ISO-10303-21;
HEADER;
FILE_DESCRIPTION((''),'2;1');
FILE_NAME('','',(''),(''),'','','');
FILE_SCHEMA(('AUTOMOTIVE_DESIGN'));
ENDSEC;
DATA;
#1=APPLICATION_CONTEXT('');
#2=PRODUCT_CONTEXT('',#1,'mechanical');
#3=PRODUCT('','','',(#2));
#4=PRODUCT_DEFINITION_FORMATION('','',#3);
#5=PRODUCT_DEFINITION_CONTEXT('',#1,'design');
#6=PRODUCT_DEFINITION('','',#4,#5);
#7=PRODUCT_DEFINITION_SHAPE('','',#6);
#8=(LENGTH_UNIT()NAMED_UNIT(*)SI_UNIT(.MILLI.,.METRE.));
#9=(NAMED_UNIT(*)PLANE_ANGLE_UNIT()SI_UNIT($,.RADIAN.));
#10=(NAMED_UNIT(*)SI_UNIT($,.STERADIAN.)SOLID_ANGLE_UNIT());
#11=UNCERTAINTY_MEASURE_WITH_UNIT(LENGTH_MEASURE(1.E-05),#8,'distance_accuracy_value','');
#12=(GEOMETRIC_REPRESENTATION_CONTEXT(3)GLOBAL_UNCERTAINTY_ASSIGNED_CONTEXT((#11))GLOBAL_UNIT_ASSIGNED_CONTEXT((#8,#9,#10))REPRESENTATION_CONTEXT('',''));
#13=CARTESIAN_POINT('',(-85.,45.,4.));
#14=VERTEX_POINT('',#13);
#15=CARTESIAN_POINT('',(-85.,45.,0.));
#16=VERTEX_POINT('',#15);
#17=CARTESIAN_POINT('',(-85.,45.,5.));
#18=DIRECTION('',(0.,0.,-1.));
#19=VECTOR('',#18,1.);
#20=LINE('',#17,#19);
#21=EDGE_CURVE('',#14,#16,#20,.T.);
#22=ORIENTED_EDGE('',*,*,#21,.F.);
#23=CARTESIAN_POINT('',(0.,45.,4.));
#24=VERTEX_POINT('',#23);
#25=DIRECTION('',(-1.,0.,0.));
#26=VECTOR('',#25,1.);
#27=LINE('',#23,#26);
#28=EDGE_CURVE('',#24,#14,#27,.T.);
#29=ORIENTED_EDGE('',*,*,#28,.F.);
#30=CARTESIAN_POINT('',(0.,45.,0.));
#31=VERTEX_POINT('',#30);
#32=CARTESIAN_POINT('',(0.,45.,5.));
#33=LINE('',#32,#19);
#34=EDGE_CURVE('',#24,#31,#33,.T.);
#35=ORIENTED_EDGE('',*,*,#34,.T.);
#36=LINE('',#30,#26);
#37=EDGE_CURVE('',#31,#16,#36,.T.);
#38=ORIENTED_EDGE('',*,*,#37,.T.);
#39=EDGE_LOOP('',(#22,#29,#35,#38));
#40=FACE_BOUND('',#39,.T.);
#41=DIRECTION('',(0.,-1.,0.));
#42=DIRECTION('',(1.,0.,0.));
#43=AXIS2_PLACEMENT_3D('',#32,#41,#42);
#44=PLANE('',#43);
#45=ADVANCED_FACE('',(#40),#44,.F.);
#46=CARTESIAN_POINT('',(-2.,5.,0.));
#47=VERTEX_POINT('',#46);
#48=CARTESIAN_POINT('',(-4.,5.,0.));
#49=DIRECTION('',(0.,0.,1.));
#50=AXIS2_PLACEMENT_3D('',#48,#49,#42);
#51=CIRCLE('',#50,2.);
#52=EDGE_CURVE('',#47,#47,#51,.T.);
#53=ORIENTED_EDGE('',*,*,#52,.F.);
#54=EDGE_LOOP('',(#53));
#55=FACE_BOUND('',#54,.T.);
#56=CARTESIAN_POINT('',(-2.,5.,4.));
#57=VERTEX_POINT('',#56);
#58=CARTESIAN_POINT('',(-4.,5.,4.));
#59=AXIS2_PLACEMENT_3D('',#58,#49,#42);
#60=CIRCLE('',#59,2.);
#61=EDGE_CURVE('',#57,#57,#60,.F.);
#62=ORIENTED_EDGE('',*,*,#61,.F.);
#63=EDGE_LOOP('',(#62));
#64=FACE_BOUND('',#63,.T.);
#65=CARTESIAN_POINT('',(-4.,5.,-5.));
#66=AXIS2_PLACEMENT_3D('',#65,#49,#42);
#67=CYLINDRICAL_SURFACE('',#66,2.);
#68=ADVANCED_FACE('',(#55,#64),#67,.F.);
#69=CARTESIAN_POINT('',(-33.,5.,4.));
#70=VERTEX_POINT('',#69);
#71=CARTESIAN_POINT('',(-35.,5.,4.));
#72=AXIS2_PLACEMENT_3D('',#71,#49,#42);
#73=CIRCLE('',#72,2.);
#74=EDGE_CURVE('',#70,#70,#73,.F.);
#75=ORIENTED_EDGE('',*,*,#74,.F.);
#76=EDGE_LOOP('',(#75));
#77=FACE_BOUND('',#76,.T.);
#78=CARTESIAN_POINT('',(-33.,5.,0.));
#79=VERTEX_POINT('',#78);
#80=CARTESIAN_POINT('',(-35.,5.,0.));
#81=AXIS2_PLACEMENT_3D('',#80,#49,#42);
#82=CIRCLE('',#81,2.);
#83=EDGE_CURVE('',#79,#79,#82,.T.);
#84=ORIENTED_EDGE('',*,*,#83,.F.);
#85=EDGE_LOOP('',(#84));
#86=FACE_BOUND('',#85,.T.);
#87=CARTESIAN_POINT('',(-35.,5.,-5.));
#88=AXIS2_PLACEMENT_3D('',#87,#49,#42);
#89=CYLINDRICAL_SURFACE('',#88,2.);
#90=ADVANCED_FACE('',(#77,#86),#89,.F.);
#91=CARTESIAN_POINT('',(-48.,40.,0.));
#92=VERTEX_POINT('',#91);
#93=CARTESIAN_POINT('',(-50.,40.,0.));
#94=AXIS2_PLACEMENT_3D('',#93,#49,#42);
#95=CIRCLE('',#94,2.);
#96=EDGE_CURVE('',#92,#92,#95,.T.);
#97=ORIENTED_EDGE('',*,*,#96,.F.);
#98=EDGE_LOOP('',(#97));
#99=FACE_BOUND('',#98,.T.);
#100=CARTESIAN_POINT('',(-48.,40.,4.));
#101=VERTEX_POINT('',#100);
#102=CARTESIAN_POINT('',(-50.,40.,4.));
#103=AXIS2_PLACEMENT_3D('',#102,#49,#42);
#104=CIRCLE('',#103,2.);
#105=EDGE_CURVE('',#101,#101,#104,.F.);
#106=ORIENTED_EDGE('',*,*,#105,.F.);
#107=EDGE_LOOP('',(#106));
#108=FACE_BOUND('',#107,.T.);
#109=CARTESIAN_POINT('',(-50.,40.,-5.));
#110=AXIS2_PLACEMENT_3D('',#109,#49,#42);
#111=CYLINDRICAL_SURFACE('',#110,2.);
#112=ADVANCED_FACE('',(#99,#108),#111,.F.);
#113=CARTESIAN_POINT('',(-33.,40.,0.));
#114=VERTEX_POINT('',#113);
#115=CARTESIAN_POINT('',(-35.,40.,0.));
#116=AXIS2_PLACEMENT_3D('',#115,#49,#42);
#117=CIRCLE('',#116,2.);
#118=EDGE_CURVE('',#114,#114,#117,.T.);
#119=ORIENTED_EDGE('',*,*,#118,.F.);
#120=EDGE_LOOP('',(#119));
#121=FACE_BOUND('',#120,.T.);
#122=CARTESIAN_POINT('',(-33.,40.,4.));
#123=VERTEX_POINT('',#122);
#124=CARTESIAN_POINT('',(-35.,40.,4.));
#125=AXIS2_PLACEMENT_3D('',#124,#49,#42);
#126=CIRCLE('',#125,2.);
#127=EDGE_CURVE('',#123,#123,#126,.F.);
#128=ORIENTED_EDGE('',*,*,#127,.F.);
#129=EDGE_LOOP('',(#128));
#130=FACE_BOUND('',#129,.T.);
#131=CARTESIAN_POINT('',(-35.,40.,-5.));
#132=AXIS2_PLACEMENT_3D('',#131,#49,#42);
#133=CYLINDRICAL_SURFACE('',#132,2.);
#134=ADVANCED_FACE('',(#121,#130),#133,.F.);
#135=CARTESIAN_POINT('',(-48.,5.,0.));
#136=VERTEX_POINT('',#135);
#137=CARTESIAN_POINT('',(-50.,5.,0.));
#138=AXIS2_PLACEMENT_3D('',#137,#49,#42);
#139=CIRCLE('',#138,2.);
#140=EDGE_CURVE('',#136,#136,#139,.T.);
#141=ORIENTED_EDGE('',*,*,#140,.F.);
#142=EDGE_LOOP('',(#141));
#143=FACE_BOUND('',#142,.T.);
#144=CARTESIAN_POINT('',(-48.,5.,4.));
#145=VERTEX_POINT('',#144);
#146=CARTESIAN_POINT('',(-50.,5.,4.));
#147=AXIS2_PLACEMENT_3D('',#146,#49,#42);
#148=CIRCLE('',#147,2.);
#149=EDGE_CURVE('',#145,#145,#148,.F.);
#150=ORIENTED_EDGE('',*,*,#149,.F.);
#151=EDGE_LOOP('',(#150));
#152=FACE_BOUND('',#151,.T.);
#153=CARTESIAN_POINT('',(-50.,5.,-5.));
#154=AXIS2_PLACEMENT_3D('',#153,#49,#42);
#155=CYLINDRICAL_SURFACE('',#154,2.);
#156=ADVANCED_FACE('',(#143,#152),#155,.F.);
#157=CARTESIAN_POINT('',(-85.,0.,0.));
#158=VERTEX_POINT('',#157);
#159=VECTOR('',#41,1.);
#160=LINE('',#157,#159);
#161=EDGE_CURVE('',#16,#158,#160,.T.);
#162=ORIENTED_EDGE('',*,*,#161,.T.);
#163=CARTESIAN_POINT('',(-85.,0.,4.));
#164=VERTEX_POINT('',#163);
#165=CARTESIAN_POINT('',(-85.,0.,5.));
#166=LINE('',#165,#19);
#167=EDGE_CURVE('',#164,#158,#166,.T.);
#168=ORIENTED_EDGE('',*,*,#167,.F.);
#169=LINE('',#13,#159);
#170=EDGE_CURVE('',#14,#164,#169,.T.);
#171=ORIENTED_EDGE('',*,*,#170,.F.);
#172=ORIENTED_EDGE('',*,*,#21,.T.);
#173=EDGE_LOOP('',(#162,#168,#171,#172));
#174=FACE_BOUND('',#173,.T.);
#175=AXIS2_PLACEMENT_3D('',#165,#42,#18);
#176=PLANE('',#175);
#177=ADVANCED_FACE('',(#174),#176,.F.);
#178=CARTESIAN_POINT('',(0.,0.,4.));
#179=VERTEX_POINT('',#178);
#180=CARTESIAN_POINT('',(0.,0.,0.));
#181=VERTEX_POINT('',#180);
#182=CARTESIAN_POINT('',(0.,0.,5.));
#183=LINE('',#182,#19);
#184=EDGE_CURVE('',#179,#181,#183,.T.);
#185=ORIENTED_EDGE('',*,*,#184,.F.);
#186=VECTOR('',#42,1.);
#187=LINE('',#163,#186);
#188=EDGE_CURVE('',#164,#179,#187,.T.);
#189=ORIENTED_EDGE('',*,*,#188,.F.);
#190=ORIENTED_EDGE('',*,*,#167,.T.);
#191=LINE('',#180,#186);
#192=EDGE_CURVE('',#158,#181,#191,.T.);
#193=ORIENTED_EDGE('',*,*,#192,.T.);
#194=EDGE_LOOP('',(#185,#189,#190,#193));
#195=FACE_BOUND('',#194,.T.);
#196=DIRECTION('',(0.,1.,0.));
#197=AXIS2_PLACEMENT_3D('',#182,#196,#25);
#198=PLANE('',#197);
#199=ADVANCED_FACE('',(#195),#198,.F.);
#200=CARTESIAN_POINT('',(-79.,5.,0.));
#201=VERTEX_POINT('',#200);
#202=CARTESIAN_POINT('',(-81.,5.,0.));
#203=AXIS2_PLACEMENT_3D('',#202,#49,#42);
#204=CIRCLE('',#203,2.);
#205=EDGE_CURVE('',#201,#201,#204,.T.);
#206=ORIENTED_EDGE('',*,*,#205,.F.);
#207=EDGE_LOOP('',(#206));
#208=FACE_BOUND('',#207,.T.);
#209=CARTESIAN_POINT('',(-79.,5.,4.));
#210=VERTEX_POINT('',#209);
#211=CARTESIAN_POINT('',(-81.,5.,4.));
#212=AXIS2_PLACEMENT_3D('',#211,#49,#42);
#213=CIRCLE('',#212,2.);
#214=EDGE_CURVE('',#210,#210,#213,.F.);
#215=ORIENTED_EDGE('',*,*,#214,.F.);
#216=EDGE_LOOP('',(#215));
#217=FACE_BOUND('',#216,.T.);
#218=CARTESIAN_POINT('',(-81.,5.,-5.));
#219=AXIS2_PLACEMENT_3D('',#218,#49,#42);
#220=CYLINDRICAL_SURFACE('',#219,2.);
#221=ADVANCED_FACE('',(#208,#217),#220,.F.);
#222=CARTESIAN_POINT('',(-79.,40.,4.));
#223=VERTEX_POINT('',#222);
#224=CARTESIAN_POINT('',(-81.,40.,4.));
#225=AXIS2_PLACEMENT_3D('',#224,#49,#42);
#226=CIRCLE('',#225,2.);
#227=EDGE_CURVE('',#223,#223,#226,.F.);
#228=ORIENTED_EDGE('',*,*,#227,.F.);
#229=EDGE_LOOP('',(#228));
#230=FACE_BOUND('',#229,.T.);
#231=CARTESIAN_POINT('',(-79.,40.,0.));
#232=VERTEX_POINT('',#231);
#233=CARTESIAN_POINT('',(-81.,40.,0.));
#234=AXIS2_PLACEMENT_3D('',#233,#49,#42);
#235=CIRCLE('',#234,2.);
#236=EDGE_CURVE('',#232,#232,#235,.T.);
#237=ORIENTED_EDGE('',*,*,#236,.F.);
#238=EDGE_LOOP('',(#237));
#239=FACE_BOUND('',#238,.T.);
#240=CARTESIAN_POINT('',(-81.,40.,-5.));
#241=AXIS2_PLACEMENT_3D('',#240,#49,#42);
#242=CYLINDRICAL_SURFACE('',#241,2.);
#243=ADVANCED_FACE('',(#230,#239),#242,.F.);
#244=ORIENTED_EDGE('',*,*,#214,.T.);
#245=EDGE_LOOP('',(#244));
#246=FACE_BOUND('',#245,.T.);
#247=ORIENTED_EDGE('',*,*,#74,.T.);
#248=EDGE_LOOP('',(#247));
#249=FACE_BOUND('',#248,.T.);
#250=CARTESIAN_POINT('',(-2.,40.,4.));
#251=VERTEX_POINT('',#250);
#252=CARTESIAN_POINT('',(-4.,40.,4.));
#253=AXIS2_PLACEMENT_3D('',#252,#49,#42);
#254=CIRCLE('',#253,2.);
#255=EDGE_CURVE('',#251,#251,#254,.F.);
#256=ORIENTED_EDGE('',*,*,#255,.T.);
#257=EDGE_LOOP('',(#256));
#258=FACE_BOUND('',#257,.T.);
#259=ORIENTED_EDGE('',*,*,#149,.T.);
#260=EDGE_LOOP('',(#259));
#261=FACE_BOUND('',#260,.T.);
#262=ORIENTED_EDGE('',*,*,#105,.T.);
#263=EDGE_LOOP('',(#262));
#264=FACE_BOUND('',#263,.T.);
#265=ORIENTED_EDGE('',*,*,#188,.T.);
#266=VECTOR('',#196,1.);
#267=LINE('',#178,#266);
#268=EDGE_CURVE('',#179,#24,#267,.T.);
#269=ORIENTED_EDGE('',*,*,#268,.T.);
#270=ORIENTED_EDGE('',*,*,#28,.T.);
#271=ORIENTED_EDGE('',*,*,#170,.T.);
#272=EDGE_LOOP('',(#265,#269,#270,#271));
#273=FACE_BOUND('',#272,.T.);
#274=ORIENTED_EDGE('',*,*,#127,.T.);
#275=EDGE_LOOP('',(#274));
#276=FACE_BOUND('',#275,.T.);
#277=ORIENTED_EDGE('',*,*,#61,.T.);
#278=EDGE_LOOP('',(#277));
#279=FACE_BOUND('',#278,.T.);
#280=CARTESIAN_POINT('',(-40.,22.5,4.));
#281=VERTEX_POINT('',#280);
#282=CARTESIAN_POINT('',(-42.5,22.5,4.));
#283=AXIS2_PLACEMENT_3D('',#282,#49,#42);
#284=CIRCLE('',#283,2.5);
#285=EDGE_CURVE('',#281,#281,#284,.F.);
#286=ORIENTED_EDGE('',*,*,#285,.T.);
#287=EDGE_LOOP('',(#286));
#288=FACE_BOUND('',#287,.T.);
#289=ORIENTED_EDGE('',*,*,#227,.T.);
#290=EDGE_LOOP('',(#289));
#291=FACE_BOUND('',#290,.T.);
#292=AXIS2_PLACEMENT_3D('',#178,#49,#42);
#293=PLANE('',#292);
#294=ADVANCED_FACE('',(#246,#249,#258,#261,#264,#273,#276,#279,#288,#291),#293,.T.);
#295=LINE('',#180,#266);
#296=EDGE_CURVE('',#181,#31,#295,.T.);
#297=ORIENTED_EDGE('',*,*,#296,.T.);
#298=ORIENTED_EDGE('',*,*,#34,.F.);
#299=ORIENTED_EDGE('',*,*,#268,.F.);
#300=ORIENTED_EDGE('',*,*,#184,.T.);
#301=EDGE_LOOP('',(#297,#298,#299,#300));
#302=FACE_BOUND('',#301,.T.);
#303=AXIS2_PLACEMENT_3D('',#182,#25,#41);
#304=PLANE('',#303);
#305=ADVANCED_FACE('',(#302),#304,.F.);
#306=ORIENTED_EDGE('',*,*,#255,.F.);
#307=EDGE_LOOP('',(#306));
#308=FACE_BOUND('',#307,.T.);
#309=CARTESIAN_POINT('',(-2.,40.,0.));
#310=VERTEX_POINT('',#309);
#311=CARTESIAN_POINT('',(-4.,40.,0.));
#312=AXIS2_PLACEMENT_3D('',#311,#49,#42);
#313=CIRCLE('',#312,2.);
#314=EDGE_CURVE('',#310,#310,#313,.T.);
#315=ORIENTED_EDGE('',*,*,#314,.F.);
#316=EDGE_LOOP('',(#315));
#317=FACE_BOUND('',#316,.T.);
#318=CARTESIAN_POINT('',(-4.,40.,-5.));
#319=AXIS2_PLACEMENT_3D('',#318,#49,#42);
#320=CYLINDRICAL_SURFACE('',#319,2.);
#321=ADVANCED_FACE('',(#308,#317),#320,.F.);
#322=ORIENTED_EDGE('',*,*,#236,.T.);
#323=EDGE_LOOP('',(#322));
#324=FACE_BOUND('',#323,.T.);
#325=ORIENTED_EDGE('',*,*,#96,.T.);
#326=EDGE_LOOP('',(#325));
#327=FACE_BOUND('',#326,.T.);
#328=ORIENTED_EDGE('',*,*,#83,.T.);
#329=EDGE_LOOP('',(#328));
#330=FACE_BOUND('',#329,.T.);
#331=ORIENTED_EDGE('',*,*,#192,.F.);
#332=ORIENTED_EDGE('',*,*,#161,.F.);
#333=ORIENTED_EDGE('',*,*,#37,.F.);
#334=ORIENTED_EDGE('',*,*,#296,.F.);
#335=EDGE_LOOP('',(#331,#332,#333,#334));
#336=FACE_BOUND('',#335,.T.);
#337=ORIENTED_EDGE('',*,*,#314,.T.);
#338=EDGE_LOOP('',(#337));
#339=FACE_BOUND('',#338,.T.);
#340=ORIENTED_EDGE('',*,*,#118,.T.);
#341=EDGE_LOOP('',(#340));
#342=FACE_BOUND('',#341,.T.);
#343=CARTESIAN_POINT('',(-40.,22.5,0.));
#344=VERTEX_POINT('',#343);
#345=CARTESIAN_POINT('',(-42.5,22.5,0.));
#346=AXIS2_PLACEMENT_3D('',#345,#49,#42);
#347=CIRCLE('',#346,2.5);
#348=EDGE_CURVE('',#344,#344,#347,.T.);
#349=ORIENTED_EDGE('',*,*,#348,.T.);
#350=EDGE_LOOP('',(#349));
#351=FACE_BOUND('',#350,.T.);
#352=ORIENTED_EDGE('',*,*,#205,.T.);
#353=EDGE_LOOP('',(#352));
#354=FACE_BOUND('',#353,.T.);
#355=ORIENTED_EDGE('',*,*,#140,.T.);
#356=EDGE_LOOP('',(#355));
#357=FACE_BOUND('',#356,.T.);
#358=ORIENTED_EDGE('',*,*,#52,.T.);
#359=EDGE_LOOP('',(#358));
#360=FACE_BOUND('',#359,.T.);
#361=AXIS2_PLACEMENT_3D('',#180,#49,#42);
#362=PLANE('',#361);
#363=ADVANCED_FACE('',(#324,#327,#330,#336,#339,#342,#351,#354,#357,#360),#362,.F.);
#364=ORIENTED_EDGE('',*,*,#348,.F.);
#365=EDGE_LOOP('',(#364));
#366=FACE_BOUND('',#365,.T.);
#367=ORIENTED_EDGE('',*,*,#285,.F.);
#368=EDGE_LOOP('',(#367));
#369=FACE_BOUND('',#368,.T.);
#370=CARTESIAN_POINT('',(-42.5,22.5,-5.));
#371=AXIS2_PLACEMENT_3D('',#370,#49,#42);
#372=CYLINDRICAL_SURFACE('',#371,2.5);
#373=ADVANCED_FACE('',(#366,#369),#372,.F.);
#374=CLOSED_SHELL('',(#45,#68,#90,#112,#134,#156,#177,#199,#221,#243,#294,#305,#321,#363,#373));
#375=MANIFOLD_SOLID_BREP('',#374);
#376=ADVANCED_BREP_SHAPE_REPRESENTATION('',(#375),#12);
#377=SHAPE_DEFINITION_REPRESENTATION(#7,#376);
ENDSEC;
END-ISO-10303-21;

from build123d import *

# Parameters (mm, degrees)
SKETCH1_W                = 85
SKETCH1_H                = 45
BOSS_EXTRUDE1_DEPTH      = 5
CUT_EXTRUDE1_OUTLINE_R   = 2
CUT_EXTRUDE1_OUTLINE_R_2 = 2.5
CUT_EXTRUDE1_DEPTH       = 5
SKETCH3_W                = 85
SKETCH3_H                = 45
CUT_EXTRUDE2_DEPTH       = 1


# Read off the part's stored shape, not the designer's step: Cut-Extrude1
with BuildPart() as part:
    # Sketch1 → Boss-Extrude1 (new body)
    with BuildSketch(Plane.XY):
        with Locations((-42.5, 22.5)):
            Rectangle(SKETCH1_W, SKETCH1_H)
    extrude(amount=BOSS_EXTRUDE1_DEPTH)

    # Cut-Extrude1 outline → Cut-Extrude1 (cut)
    with BuildSketch(Plane.XY):
        with Locations((-81, 40)):
            Circle(CUT_EXTRUDE1_OUTLINE_R)
        with Locations((-35, 5)):
            Circle(CUT_EXTRUDE1_OUTLINE_R)
        with Locations((-35, 40)):
            Circle(CUT_EXTRUDE1_OUTLINE_R)
        with Locations((-4, 40)):
            Circle(CUT_EXTRUDE1_OUTLINE_R)
        with Locations((-42.5, 22.5)):
            Circle(CUT_EXTRUDE1_OUTLINE_R_2)
        with Locations((-81, 5)):
            Circle(CUT_EXTRUDE1_OUTLINE_R)
        with Locations((-50, 5)):
            Circle(CUT_EXTRUDE1_OUTLINE_R)
        with Locations((-50, 40)):
            Circle(CUT_EXTRUDE1_OUTLINE_R)
        with Locations((-4, 5)):
            Circle(CUT_EXTRUDE1_OUTLINE_R)
    extrude(amount=CUT_EXTRUDE1_DEPTH, mode=Mode.SUBTRACT)

    # Sketch3 → Cut-Extrude2 (cut)
    with BuildSketch(Plane.XY.offset(5)):
        with Locations((-42.5, 22.5)):
            Rectangle(SKETCH3_W, SKETCH3_H)
    extrude(amount=-CUT_EXTRUDE2_DEPTH, mode=Mode.SUBTRACT)


solid = part.part
